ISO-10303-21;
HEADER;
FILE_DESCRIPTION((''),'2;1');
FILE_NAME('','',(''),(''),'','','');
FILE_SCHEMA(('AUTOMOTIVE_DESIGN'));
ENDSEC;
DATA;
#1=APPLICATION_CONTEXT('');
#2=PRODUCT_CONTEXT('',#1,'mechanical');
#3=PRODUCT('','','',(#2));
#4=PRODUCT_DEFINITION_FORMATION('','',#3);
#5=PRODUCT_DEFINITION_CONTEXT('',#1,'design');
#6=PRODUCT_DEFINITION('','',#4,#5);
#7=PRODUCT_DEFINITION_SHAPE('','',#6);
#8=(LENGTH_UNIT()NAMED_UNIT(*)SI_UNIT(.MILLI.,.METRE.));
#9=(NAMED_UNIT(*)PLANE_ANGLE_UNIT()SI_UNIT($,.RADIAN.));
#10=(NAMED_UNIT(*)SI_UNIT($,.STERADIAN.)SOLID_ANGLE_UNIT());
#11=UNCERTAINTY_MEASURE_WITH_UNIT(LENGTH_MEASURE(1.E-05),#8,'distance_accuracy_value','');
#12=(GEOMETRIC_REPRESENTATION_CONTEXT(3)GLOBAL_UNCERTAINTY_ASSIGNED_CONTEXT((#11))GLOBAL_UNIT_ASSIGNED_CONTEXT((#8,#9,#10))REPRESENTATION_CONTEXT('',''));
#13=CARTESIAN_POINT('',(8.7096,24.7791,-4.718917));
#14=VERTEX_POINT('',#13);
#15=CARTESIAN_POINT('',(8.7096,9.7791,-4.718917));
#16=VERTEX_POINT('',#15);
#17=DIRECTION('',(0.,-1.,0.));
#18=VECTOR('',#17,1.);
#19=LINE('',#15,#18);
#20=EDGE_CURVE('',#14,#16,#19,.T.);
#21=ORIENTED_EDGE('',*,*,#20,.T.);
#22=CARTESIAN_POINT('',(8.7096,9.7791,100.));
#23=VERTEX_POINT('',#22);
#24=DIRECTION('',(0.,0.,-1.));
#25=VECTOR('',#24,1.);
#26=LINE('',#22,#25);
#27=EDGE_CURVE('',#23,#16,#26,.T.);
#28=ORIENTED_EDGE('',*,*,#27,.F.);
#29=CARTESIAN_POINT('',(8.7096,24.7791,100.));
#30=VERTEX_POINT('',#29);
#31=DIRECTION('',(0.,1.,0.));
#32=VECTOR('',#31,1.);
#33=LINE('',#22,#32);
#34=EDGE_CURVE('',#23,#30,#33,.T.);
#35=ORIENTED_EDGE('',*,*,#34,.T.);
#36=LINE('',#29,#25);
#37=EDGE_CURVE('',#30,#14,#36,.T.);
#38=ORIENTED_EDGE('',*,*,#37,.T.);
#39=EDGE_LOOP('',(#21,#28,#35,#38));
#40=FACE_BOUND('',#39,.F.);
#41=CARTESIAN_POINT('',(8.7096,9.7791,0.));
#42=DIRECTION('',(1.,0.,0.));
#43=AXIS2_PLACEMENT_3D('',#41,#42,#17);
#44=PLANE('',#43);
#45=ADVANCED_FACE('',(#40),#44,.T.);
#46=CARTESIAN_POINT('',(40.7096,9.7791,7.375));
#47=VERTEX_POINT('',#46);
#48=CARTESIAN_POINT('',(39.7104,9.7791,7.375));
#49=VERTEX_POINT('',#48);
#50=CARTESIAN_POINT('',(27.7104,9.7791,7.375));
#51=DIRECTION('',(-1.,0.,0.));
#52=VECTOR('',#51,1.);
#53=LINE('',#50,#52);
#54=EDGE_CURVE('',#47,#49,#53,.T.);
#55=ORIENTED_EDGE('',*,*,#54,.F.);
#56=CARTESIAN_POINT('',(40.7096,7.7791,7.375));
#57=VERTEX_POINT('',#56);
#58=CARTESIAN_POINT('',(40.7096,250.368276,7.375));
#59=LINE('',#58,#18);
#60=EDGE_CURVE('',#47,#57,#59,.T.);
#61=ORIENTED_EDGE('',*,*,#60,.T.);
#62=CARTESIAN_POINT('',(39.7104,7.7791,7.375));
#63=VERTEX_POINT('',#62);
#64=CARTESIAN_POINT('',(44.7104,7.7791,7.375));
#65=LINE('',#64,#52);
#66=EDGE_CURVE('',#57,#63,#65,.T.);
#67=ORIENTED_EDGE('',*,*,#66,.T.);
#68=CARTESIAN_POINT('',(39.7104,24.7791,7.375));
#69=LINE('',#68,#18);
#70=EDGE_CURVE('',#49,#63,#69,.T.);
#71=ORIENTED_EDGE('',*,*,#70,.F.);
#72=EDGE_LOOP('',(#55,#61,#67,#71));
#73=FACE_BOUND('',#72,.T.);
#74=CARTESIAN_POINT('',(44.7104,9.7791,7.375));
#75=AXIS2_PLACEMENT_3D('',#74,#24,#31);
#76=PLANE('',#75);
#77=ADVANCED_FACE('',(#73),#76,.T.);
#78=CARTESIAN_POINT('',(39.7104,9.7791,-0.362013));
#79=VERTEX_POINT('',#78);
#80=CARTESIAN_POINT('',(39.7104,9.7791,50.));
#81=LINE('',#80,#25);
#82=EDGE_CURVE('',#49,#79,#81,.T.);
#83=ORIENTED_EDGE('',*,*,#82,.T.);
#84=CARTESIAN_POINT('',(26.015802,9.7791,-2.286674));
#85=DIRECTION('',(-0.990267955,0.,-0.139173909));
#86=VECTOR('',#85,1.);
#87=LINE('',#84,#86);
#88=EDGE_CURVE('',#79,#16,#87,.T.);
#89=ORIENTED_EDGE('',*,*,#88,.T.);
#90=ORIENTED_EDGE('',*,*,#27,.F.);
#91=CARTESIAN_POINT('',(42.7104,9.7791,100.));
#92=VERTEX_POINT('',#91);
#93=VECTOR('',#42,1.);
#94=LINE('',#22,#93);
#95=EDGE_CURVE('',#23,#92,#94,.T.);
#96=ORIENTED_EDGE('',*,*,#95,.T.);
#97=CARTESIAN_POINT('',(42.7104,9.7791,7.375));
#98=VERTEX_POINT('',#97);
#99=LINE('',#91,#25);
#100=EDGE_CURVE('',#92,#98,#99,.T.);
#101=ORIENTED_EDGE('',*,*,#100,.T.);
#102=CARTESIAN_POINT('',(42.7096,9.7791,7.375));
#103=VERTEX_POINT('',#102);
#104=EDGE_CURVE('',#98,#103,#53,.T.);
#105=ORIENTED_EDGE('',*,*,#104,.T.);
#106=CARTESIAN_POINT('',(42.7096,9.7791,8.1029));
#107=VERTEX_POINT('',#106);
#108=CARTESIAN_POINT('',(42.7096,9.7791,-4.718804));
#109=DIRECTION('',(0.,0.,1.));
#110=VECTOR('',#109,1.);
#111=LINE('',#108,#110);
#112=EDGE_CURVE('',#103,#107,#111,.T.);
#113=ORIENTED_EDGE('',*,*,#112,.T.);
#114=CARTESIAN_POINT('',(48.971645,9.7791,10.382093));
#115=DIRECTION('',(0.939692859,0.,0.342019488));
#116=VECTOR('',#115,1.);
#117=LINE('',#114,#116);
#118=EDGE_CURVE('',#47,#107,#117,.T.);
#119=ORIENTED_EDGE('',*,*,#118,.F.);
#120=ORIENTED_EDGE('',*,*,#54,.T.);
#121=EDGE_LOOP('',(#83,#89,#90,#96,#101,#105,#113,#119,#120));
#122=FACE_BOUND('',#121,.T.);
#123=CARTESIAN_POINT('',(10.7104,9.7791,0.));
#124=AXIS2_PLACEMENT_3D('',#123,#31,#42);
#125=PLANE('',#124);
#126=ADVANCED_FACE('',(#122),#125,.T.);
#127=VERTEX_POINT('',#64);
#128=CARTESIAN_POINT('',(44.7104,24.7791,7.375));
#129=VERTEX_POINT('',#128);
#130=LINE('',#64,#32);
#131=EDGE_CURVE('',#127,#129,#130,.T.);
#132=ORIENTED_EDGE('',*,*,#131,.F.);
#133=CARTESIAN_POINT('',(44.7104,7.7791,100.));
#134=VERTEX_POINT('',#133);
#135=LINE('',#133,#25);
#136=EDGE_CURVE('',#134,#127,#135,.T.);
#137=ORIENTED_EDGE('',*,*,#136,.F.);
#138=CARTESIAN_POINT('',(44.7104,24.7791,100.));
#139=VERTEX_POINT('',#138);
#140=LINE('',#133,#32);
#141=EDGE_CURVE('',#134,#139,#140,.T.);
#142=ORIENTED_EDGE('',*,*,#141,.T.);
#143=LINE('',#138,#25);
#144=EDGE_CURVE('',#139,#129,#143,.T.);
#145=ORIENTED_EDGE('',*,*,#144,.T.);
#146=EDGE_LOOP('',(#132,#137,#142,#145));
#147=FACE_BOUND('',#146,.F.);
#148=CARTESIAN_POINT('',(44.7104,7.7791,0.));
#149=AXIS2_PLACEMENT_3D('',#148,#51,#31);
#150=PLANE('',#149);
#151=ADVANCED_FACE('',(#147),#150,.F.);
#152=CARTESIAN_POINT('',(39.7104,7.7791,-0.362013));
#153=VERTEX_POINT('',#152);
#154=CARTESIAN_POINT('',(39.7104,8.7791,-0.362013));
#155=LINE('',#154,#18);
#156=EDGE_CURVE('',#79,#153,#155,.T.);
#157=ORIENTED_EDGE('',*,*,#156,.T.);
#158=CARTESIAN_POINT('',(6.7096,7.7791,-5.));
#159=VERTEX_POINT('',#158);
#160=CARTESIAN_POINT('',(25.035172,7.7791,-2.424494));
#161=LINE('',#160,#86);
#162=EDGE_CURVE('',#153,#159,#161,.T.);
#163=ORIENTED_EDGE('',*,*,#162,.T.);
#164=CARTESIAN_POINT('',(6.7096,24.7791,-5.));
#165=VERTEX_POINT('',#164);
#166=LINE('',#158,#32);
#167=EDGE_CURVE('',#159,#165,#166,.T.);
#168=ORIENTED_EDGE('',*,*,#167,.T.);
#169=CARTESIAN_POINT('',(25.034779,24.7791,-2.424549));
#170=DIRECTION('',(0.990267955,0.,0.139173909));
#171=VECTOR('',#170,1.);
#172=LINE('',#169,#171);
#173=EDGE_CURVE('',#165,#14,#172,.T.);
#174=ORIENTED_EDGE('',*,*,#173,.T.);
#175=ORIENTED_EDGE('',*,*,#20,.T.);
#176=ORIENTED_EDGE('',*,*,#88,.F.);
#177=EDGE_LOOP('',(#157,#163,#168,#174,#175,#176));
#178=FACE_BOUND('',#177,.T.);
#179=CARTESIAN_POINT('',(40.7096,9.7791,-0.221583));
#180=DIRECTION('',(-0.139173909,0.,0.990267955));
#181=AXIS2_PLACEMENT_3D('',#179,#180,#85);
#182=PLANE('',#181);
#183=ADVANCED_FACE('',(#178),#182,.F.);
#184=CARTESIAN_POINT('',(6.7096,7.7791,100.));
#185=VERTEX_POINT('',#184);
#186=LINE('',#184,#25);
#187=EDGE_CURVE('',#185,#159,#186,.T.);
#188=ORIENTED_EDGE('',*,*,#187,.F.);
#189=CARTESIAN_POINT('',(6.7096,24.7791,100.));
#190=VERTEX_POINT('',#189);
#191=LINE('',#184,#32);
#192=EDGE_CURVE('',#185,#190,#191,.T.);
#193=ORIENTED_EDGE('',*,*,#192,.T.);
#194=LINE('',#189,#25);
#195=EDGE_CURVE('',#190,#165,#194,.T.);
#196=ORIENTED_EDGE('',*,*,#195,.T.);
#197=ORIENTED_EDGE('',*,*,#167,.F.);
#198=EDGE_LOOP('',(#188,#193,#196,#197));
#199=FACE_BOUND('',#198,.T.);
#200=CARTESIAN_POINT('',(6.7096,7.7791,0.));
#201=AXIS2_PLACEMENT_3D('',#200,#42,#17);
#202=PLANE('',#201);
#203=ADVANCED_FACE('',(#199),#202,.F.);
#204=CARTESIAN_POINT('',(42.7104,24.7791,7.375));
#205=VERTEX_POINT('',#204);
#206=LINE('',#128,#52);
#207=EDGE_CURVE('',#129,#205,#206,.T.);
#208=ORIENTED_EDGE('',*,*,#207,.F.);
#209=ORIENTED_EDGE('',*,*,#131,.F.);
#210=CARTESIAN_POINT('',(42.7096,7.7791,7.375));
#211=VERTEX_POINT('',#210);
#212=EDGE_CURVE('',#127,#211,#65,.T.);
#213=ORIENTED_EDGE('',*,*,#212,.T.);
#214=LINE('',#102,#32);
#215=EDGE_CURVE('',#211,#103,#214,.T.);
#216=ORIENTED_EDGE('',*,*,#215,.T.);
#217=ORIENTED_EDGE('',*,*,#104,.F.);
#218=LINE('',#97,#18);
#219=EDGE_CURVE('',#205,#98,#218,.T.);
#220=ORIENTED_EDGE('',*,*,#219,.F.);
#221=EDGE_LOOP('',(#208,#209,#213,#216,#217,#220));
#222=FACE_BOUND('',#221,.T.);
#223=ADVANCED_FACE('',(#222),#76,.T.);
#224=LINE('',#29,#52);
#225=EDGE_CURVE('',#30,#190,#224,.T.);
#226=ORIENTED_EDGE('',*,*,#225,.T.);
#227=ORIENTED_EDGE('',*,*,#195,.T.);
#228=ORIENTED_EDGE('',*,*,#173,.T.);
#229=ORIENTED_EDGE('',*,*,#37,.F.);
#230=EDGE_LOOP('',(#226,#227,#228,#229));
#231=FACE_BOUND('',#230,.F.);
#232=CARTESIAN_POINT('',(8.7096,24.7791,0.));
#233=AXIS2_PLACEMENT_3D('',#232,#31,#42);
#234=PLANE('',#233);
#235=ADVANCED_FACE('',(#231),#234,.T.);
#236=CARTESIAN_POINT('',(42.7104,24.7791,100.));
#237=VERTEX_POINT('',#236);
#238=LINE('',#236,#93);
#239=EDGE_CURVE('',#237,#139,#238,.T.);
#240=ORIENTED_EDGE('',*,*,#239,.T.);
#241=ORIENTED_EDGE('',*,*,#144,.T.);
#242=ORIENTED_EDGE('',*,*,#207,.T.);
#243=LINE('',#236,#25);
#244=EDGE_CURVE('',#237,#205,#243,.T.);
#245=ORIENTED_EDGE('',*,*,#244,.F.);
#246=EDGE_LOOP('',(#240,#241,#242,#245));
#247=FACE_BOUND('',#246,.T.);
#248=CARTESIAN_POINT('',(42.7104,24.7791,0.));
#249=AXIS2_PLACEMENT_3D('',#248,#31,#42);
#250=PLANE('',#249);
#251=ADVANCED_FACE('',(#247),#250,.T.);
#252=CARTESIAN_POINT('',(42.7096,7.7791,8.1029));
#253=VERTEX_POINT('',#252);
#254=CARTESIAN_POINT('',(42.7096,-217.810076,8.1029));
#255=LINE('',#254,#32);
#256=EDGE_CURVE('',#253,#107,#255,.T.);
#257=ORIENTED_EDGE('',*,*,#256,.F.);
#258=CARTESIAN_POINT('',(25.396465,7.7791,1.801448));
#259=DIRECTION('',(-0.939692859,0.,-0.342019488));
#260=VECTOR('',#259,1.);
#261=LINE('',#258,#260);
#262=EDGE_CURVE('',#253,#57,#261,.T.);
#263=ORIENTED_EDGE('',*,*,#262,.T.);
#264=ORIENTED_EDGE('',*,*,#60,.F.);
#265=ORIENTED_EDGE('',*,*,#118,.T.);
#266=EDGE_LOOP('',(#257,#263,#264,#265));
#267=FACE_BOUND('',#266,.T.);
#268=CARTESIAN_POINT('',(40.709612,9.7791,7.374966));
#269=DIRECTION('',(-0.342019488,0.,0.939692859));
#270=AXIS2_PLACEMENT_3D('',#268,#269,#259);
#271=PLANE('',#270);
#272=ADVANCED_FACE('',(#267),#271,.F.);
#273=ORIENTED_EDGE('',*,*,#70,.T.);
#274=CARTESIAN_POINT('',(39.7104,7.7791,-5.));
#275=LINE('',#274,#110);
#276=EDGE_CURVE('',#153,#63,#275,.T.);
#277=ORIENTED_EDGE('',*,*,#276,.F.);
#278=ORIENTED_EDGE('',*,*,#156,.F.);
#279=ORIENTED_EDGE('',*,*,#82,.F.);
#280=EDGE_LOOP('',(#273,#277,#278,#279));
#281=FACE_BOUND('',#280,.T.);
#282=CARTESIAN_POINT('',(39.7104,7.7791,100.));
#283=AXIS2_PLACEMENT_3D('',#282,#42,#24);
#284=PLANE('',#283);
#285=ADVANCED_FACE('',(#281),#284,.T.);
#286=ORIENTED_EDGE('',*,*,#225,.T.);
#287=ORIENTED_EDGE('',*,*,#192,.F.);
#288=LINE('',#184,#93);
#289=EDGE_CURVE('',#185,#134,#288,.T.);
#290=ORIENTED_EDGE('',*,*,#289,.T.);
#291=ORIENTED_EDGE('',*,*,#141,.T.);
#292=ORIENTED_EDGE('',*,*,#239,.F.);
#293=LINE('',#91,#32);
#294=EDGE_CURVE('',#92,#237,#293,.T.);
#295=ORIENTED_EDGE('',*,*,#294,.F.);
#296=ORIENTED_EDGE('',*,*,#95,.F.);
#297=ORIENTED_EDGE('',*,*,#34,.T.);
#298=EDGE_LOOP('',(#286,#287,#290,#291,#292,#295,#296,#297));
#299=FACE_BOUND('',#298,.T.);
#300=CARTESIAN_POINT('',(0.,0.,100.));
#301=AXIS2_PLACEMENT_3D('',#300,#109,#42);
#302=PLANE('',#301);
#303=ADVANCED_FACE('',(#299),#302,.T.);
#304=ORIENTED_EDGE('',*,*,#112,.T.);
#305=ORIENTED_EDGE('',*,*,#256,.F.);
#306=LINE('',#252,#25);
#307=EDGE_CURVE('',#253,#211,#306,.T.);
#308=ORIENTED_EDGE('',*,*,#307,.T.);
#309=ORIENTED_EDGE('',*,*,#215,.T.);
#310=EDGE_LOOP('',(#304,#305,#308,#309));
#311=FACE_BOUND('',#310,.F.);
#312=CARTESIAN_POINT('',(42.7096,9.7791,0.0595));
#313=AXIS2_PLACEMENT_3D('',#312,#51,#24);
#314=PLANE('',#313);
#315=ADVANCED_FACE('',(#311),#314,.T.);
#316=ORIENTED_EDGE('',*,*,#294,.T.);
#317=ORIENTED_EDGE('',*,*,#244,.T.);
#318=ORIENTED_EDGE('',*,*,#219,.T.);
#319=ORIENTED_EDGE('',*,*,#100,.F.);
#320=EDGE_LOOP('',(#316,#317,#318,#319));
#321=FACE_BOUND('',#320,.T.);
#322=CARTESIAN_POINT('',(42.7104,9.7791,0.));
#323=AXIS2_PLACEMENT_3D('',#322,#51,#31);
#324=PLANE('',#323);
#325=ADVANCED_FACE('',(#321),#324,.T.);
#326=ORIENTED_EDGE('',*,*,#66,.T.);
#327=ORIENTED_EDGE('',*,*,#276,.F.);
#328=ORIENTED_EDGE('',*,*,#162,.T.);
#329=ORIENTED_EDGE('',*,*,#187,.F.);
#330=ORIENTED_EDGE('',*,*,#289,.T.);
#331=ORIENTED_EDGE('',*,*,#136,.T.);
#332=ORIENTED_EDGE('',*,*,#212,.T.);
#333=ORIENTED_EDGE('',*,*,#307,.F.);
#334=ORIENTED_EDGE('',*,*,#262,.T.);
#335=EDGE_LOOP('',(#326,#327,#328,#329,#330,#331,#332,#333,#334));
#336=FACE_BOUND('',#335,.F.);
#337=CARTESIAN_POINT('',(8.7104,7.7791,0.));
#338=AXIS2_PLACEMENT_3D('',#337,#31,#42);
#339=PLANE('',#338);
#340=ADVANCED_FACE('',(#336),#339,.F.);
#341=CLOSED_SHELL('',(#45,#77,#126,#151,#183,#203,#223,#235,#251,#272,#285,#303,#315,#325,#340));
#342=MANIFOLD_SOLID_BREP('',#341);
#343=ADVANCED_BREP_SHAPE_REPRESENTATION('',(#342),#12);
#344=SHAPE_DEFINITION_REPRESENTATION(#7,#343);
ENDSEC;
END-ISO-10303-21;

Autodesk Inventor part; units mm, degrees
ref_plane "XZ Plane" through (0, 0, 0) normal (0, 1, 0) x (-1, 0, 0)
ref_plane "XY Plane" through (0, 0, 0) normal (0, 0, 1) x (1, 0, 0)
sketch "Sketch1" plane through (0, 0, 0) normal (0, 0, 1) x (1, 0, 0)
  line L0 (10.7104, 9.7791) -> (42.7104, 9.7791)
  line L1 (42.7104, 9.7791) -> (42.7104, 24.7791)
  line L2 (10.7104, 9.7791) -> (10.7104, 24.7791)
  line L3 (8.7104, 24.7791) -> (8.7104, 7.7791)
  line L4 (8.7104, 7.7791) -> (44.7104, 7.7791)
  line L5 (44.7104, 7.7791) -> (44.7104, 24.7791)
  line L6 (8.7104, 24.7791) -> (10.7104, 24.7791)
  line L7 (42.7104, 24.7791) -> (44.7104, 24.7791)
  point P0 (0, 0)
  dimension "d0" = 32
  dimension "d1" = 15
  dimension "d2" = 15
  dimension "d3" = 2
extrude "Extrusion1" add sketch "Sketch1" along normal blind 100 and the other way blind 5
sketch "Sketch3" plane through (10.7104, 9.7791, 100) normal (0, 1, 0) x (1, 0, 0)
  line L0 (-2, 105) -> (-2, 0) projected
  line L1 (-2, 91.8971) -> (-2, 105)
  line L2 (32, 105) -> (34, 105) projected
  line L3 (34, 105) -> (-2, 91.8971)
  line L4 (-2, 105) -> (-2, 91.8971)
  line L5 (-2, 105) -> (34, 105)
  line L6 (0, 105) -> (0, 0) projected
  line L7 (0, 92.625) -> (0, 105)
  line L8 (34, 105) -> (-2, 99.9405)
  line L9 (34, 105) -> (70.3538, 105) construction
  line L10 (-2, 99.9405) -> (-2, 105)
  point P0 (-10.7104, 100)
  point P1 (-2, 99.9405)
  point P2 (0, 100.2216)
  dimension "d15" = 20
  dimension "d16" = 172
extrude "Extrusion4" cut sketch "Sketch3" along normal through all both and the other way through all contours L5 L6 L8 L0 | L5 L2 L8 L6
extrude "Extrusion5" cut sketch "Sketch3" along normal through all both and the other way through all contours L8 L6 L3 L0
ref_plane "Work Plane1" through (25.71, 0, 0) normal (1, 0, 0) x (0, 1, 0)
mirror "Mirror1" about plane through (25.71, 0, 0) normal (1, 0, 0) of "Extrusion5", "Extrusion4", "Extrusion1"
sketch "Sketch4" plane through (44.7104, 7.7791, 100) normal (1, 0, 0) x (0, 0, -1)
  line L0 (92.625, 2) -> (92.625, 17) projected
  line L1 (92.625, 17) -> (92.625, 2)
  line L2 (92.625, 2) -> (105, 2)
  line L3 (105, 17) -> (105, 0) projected
  line L4 (104.7189, 17) -> (0, 17) projected
  line L5 (105, 17) -> (93.3527, 17)
  line L6 (92.625, 2) -> (92.625, 0)
  line L7 (105, 0) -> (0, 0) projected
  line L8 (92.625, 0) -> (105, 0)
  line L9 (105, 0) -> (105, 2)
  line L10 (92.625, 17) -> (0, 17)
  line L11 (0, 0) -> (0, 17) projected
  line L12 (91.8971, 2) -> (0, 2) projected
  line L13 (0, 2) -> (91.8971, 2)
  point P0 (100, -7.7791)
  point P1 (95.3874, 17)
sketch "Sketch5" plane through (25.71, 0, 0) normal (1, 0, 0) x (0, 1, 0)
  line L0 (7.7791, 100) -> (24.7791, 100) projected
  line L1 (24.7791, 100) -> (9.7791, 100)
  line L2 (7.7791, 7.375) -> (9.7791, 7.375) projected
  line L3 (9.7791, 100) -> (9.7791, 7.375)
  line L4 (9.7791, 7.375) -> (24.7791, 7.375)
  line L5 (24.7791, 7.375) -> (24.7791, 100)
  line L6 (9.7791, 7.375) -> (9.7791, 100)
  point P0 (0, 0)
  dimension "d24" = 15
extrude "Extrusion7" cut sketch "Sketch5" along normal mid plane 34
extrude "Extrusion8" cut sketch "Sketch4" against normal blind 5 contours L0 L4 L5 L3 L2 | L2 L3 L7 L6
equation "\"BendRadius\" = Thickness"
equation "\"BendReliefWidth\" = Thickness"
equation "\"BendReliefDepth\" = 0.5 * Thickness"
equation "\"CornerReliefSize\" = 4 * Thickness"
equation "\"MinimumRemnant\" = 2 * Thickness"
equation "\"TransitionRadius\" = BendRadius"
equation "\"JacobiRadiusSize\" = BendRadius"
equation "\"GapSize\" = Thickness"
equation "\"Thickness\" = 0.5"
properties part number "outslideleft"
